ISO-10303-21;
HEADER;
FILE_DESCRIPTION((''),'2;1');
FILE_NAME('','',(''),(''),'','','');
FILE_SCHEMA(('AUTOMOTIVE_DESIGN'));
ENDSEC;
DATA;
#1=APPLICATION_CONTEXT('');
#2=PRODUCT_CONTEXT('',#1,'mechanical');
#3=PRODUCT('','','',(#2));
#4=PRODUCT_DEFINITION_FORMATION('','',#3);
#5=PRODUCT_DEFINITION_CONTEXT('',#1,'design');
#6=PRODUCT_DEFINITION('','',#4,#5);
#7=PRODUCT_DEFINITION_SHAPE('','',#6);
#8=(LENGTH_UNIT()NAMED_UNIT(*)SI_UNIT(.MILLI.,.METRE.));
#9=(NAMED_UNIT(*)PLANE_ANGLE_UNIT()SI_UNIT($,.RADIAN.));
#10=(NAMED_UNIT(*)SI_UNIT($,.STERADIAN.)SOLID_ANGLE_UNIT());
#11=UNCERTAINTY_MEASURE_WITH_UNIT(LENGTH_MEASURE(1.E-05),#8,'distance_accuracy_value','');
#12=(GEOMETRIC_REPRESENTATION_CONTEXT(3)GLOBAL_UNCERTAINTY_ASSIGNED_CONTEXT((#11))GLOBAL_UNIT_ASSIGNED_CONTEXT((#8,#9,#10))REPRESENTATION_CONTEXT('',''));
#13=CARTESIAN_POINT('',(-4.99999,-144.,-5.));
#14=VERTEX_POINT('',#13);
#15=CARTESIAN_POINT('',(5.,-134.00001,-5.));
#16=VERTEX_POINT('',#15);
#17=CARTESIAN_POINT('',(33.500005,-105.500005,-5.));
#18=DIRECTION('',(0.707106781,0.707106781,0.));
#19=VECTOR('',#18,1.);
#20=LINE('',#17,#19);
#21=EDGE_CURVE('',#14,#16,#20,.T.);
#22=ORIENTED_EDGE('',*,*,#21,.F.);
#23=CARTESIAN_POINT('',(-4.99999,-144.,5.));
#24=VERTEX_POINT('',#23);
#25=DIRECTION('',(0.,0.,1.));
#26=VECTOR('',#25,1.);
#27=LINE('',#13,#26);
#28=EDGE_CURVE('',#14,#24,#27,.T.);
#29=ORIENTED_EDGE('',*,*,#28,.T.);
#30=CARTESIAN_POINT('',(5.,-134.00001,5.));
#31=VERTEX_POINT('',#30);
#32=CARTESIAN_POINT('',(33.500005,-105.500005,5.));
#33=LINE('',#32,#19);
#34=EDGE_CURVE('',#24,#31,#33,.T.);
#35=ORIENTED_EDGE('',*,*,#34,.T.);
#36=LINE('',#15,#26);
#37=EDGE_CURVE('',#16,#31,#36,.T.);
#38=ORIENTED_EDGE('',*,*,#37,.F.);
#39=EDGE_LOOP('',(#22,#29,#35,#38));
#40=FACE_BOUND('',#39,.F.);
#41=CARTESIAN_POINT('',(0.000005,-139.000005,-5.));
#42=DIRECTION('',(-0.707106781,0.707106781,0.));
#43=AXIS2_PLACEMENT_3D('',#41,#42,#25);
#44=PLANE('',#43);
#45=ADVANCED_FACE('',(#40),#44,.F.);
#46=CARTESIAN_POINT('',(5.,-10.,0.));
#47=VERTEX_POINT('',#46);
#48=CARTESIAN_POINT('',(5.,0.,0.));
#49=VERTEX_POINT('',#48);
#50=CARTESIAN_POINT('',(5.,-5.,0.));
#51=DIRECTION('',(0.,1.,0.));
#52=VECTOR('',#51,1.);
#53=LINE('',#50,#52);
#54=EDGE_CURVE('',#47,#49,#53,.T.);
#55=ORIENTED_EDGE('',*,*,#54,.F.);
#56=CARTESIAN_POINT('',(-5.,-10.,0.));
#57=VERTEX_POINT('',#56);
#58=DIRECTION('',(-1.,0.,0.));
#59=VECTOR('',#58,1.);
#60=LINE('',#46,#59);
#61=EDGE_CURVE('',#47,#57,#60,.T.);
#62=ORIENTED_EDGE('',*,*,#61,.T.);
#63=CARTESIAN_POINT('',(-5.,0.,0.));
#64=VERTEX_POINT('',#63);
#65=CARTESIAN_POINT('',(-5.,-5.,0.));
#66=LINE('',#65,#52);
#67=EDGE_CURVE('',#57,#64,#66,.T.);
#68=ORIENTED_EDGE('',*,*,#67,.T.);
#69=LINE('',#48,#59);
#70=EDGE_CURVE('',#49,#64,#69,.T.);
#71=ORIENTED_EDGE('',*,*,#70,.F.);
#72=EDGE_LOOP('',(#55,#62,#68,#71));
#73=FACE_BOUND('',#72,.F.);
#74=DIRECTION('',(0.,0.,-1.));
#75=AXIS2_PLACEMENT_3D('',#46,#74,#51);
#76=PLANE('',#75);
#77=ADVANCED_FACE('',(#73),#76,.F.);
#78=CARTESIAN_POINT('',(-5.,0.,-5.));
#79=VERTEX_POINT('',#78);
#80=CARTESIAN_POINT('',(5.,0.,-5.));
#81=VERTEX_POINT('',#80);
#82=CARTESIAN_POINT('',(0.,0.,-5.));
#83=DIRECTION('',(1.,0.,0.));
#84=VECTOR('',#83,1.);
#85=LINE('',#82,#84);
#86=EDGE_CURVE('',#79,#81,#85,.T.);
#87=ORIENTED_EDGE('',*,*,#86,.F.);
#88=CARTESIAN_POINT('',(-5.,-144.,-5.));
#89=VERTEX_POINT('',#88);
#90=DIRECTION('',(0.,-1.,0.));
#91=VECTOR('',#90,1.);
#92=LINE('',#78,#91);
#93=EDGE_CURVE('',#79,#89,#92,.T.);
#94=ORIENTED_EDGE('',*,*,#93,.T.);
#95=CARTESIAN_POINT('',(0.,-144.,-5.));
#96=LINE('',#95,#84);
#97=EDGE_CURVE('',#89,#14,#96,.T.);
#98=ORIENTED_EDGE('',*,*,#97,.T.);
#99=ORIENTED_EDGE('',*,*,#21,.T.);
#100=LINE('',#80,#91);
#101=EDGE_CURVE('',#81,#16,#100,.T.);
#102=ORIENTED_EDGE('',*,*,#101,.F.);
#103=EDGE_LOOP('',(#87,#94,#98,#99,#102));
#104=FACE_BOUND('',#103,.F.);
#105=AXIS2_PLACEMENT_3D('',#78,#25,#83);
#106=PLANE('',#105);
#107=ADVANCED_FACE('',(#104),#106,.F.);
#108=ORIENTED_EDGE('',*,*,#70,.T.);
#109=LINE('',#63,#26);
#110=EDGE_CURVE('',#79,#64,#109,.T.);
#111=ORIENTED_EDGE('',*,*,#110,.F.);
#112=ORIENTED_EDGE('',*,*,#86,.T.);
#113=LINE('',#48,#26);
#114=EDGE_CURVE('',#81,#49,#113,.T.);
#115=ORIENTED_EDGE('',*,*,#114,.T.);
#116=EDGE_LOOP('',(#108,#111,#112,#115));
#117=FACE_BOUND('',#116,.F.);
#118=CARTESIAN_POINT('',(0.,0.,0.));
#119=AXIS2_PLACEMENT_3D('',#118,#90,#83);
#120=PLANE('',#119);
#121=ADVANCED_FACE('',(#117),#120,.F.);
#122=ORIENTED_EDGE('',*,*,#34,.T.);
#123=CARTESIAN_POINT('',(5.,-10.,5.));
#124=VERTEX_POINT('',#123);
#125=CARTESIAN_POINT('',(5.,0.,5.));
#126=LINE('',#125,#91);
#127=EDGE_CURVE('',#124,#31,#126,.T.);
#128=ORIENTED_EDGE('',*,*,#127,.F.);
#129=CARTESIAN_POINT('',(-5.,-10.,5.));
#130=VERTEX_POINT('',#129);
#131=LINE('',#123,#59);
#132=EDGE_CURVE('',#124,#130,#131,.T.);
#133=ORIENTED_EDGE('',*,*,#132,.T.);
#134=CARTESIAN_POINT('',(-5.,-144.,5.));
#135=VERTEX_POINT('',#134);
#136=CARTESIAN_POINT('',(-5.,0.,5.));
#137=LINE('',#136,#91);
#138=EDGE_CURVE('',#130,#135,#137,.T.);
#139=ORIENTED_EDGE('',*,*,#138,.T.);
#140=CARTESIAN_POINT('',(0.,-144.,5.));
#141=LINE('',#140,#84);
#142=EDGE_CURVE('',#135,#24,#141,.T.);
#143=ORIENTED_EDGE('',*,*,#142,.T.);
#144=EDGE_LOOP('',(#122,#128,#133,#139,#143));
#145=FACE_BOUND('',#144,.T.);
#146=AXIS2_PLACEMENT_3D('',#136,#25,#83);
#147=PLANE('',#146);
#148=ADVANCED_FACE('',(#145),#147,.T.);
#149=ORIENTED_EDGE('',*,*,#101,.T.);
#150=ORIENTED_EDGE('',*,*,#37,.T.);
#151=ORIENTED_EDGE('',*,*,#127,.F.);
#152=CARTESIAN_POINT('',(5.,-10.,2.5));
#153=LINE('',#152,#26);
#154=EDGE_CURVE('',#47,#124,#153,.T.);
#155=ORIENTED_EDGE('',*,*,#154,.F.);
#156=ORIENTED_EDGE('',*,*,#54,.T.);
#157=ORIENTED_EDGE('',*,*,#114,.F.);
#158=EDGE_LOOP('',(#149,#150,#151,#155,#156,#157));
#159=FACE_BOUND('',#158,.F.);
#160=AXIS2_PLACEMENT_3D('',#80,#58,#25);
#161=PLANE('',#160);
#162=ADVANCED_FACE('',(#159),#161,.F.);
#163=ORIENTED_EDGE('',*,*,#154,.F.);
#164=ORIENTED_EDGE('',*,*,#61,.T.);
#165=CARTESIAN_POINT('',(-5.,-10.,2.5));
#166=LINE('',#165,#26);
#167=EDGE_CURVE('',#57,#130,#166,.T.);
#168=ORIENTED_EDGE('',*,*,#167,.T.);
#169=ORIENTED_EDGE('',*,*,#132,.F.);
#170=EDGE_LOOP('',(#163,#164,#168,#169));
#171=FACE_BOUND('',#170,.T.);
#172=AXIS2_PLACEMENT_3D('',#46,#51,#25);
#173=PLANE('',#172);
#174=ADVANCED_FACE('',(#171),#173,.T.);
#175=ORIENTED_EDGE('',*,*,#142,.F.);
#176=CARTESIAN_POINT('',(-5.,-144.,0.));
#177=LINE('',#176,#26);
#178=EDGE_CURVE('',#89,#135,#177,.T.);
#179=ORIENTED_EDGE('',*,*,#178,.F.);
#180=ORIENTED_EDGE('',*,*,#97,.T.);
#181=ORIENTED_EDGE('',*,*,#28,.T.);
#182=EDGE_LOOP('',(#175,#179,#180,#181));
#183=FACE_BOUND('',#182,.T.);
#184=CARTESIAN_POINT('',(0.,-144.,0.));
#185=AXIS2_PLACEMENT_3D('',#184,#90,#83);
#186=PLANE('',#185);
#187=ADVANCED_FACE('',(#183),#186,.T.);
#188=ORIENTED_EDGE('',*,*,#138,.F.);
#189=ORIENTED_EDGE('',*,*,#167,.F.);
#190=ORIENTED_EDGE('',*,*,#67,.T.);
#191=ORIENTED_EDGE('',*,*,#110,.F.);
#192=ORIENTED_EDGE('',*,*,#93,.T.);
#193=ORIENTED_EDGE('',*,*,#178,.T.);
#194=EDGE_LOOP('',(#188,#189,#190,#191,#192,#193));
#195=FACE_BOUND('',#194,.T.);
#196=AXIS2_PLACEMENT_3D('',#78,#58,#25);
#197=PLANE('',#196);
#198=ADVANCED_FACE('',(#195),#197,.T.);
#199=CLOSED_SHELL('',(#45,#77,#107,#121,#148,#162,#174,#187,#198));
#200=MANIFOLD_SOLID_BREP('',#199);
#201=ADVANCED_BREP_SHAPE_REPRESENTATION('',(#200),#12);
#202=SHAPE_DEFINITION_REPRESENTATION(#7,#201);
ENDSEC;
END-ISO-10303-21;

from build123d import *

# Parameters (mm, degrees)
F0_W     = 10
F0_H     = 10
F1_DEPTH = 144
F2_W     = 10
F2_H     = 5
F3_DEPTH = 10
F4_SIZE  = 9.99999


# Not quite as in the source:
# - a fillet or chamfer is up to 0.001 mm smaller than in the source, because OpenCascade refuses the exact size


with BuildPart() as f1:
    # F0 (on Front) → F1 (new body)
    with BuildSketch(Plane.XZ):
        Rectangle(F0_W, F0_H)
    extrude(amount=F1_DEPTH)

    # F2 (on face) → F3 (cut)
    with BuildSketch(Plane.YZ.offset(5)):
        with Locations((-5, 2.5)):
            Rectangle(F2_W, F2_H)
    extrude(amount=-F3_DEPTH, mode=Mode.SUBTRACT)

    # F4 (size 10 in the source; OpenCascade refuses exactly that, so slightly less here)
    f4_edges = [f1.edges().sort_by_distance(p)[0] for p in [
        (5, -144, 0),
    ]]
    chamfer(f4_edges, length=F4_SIZE)


solid = f1.part
